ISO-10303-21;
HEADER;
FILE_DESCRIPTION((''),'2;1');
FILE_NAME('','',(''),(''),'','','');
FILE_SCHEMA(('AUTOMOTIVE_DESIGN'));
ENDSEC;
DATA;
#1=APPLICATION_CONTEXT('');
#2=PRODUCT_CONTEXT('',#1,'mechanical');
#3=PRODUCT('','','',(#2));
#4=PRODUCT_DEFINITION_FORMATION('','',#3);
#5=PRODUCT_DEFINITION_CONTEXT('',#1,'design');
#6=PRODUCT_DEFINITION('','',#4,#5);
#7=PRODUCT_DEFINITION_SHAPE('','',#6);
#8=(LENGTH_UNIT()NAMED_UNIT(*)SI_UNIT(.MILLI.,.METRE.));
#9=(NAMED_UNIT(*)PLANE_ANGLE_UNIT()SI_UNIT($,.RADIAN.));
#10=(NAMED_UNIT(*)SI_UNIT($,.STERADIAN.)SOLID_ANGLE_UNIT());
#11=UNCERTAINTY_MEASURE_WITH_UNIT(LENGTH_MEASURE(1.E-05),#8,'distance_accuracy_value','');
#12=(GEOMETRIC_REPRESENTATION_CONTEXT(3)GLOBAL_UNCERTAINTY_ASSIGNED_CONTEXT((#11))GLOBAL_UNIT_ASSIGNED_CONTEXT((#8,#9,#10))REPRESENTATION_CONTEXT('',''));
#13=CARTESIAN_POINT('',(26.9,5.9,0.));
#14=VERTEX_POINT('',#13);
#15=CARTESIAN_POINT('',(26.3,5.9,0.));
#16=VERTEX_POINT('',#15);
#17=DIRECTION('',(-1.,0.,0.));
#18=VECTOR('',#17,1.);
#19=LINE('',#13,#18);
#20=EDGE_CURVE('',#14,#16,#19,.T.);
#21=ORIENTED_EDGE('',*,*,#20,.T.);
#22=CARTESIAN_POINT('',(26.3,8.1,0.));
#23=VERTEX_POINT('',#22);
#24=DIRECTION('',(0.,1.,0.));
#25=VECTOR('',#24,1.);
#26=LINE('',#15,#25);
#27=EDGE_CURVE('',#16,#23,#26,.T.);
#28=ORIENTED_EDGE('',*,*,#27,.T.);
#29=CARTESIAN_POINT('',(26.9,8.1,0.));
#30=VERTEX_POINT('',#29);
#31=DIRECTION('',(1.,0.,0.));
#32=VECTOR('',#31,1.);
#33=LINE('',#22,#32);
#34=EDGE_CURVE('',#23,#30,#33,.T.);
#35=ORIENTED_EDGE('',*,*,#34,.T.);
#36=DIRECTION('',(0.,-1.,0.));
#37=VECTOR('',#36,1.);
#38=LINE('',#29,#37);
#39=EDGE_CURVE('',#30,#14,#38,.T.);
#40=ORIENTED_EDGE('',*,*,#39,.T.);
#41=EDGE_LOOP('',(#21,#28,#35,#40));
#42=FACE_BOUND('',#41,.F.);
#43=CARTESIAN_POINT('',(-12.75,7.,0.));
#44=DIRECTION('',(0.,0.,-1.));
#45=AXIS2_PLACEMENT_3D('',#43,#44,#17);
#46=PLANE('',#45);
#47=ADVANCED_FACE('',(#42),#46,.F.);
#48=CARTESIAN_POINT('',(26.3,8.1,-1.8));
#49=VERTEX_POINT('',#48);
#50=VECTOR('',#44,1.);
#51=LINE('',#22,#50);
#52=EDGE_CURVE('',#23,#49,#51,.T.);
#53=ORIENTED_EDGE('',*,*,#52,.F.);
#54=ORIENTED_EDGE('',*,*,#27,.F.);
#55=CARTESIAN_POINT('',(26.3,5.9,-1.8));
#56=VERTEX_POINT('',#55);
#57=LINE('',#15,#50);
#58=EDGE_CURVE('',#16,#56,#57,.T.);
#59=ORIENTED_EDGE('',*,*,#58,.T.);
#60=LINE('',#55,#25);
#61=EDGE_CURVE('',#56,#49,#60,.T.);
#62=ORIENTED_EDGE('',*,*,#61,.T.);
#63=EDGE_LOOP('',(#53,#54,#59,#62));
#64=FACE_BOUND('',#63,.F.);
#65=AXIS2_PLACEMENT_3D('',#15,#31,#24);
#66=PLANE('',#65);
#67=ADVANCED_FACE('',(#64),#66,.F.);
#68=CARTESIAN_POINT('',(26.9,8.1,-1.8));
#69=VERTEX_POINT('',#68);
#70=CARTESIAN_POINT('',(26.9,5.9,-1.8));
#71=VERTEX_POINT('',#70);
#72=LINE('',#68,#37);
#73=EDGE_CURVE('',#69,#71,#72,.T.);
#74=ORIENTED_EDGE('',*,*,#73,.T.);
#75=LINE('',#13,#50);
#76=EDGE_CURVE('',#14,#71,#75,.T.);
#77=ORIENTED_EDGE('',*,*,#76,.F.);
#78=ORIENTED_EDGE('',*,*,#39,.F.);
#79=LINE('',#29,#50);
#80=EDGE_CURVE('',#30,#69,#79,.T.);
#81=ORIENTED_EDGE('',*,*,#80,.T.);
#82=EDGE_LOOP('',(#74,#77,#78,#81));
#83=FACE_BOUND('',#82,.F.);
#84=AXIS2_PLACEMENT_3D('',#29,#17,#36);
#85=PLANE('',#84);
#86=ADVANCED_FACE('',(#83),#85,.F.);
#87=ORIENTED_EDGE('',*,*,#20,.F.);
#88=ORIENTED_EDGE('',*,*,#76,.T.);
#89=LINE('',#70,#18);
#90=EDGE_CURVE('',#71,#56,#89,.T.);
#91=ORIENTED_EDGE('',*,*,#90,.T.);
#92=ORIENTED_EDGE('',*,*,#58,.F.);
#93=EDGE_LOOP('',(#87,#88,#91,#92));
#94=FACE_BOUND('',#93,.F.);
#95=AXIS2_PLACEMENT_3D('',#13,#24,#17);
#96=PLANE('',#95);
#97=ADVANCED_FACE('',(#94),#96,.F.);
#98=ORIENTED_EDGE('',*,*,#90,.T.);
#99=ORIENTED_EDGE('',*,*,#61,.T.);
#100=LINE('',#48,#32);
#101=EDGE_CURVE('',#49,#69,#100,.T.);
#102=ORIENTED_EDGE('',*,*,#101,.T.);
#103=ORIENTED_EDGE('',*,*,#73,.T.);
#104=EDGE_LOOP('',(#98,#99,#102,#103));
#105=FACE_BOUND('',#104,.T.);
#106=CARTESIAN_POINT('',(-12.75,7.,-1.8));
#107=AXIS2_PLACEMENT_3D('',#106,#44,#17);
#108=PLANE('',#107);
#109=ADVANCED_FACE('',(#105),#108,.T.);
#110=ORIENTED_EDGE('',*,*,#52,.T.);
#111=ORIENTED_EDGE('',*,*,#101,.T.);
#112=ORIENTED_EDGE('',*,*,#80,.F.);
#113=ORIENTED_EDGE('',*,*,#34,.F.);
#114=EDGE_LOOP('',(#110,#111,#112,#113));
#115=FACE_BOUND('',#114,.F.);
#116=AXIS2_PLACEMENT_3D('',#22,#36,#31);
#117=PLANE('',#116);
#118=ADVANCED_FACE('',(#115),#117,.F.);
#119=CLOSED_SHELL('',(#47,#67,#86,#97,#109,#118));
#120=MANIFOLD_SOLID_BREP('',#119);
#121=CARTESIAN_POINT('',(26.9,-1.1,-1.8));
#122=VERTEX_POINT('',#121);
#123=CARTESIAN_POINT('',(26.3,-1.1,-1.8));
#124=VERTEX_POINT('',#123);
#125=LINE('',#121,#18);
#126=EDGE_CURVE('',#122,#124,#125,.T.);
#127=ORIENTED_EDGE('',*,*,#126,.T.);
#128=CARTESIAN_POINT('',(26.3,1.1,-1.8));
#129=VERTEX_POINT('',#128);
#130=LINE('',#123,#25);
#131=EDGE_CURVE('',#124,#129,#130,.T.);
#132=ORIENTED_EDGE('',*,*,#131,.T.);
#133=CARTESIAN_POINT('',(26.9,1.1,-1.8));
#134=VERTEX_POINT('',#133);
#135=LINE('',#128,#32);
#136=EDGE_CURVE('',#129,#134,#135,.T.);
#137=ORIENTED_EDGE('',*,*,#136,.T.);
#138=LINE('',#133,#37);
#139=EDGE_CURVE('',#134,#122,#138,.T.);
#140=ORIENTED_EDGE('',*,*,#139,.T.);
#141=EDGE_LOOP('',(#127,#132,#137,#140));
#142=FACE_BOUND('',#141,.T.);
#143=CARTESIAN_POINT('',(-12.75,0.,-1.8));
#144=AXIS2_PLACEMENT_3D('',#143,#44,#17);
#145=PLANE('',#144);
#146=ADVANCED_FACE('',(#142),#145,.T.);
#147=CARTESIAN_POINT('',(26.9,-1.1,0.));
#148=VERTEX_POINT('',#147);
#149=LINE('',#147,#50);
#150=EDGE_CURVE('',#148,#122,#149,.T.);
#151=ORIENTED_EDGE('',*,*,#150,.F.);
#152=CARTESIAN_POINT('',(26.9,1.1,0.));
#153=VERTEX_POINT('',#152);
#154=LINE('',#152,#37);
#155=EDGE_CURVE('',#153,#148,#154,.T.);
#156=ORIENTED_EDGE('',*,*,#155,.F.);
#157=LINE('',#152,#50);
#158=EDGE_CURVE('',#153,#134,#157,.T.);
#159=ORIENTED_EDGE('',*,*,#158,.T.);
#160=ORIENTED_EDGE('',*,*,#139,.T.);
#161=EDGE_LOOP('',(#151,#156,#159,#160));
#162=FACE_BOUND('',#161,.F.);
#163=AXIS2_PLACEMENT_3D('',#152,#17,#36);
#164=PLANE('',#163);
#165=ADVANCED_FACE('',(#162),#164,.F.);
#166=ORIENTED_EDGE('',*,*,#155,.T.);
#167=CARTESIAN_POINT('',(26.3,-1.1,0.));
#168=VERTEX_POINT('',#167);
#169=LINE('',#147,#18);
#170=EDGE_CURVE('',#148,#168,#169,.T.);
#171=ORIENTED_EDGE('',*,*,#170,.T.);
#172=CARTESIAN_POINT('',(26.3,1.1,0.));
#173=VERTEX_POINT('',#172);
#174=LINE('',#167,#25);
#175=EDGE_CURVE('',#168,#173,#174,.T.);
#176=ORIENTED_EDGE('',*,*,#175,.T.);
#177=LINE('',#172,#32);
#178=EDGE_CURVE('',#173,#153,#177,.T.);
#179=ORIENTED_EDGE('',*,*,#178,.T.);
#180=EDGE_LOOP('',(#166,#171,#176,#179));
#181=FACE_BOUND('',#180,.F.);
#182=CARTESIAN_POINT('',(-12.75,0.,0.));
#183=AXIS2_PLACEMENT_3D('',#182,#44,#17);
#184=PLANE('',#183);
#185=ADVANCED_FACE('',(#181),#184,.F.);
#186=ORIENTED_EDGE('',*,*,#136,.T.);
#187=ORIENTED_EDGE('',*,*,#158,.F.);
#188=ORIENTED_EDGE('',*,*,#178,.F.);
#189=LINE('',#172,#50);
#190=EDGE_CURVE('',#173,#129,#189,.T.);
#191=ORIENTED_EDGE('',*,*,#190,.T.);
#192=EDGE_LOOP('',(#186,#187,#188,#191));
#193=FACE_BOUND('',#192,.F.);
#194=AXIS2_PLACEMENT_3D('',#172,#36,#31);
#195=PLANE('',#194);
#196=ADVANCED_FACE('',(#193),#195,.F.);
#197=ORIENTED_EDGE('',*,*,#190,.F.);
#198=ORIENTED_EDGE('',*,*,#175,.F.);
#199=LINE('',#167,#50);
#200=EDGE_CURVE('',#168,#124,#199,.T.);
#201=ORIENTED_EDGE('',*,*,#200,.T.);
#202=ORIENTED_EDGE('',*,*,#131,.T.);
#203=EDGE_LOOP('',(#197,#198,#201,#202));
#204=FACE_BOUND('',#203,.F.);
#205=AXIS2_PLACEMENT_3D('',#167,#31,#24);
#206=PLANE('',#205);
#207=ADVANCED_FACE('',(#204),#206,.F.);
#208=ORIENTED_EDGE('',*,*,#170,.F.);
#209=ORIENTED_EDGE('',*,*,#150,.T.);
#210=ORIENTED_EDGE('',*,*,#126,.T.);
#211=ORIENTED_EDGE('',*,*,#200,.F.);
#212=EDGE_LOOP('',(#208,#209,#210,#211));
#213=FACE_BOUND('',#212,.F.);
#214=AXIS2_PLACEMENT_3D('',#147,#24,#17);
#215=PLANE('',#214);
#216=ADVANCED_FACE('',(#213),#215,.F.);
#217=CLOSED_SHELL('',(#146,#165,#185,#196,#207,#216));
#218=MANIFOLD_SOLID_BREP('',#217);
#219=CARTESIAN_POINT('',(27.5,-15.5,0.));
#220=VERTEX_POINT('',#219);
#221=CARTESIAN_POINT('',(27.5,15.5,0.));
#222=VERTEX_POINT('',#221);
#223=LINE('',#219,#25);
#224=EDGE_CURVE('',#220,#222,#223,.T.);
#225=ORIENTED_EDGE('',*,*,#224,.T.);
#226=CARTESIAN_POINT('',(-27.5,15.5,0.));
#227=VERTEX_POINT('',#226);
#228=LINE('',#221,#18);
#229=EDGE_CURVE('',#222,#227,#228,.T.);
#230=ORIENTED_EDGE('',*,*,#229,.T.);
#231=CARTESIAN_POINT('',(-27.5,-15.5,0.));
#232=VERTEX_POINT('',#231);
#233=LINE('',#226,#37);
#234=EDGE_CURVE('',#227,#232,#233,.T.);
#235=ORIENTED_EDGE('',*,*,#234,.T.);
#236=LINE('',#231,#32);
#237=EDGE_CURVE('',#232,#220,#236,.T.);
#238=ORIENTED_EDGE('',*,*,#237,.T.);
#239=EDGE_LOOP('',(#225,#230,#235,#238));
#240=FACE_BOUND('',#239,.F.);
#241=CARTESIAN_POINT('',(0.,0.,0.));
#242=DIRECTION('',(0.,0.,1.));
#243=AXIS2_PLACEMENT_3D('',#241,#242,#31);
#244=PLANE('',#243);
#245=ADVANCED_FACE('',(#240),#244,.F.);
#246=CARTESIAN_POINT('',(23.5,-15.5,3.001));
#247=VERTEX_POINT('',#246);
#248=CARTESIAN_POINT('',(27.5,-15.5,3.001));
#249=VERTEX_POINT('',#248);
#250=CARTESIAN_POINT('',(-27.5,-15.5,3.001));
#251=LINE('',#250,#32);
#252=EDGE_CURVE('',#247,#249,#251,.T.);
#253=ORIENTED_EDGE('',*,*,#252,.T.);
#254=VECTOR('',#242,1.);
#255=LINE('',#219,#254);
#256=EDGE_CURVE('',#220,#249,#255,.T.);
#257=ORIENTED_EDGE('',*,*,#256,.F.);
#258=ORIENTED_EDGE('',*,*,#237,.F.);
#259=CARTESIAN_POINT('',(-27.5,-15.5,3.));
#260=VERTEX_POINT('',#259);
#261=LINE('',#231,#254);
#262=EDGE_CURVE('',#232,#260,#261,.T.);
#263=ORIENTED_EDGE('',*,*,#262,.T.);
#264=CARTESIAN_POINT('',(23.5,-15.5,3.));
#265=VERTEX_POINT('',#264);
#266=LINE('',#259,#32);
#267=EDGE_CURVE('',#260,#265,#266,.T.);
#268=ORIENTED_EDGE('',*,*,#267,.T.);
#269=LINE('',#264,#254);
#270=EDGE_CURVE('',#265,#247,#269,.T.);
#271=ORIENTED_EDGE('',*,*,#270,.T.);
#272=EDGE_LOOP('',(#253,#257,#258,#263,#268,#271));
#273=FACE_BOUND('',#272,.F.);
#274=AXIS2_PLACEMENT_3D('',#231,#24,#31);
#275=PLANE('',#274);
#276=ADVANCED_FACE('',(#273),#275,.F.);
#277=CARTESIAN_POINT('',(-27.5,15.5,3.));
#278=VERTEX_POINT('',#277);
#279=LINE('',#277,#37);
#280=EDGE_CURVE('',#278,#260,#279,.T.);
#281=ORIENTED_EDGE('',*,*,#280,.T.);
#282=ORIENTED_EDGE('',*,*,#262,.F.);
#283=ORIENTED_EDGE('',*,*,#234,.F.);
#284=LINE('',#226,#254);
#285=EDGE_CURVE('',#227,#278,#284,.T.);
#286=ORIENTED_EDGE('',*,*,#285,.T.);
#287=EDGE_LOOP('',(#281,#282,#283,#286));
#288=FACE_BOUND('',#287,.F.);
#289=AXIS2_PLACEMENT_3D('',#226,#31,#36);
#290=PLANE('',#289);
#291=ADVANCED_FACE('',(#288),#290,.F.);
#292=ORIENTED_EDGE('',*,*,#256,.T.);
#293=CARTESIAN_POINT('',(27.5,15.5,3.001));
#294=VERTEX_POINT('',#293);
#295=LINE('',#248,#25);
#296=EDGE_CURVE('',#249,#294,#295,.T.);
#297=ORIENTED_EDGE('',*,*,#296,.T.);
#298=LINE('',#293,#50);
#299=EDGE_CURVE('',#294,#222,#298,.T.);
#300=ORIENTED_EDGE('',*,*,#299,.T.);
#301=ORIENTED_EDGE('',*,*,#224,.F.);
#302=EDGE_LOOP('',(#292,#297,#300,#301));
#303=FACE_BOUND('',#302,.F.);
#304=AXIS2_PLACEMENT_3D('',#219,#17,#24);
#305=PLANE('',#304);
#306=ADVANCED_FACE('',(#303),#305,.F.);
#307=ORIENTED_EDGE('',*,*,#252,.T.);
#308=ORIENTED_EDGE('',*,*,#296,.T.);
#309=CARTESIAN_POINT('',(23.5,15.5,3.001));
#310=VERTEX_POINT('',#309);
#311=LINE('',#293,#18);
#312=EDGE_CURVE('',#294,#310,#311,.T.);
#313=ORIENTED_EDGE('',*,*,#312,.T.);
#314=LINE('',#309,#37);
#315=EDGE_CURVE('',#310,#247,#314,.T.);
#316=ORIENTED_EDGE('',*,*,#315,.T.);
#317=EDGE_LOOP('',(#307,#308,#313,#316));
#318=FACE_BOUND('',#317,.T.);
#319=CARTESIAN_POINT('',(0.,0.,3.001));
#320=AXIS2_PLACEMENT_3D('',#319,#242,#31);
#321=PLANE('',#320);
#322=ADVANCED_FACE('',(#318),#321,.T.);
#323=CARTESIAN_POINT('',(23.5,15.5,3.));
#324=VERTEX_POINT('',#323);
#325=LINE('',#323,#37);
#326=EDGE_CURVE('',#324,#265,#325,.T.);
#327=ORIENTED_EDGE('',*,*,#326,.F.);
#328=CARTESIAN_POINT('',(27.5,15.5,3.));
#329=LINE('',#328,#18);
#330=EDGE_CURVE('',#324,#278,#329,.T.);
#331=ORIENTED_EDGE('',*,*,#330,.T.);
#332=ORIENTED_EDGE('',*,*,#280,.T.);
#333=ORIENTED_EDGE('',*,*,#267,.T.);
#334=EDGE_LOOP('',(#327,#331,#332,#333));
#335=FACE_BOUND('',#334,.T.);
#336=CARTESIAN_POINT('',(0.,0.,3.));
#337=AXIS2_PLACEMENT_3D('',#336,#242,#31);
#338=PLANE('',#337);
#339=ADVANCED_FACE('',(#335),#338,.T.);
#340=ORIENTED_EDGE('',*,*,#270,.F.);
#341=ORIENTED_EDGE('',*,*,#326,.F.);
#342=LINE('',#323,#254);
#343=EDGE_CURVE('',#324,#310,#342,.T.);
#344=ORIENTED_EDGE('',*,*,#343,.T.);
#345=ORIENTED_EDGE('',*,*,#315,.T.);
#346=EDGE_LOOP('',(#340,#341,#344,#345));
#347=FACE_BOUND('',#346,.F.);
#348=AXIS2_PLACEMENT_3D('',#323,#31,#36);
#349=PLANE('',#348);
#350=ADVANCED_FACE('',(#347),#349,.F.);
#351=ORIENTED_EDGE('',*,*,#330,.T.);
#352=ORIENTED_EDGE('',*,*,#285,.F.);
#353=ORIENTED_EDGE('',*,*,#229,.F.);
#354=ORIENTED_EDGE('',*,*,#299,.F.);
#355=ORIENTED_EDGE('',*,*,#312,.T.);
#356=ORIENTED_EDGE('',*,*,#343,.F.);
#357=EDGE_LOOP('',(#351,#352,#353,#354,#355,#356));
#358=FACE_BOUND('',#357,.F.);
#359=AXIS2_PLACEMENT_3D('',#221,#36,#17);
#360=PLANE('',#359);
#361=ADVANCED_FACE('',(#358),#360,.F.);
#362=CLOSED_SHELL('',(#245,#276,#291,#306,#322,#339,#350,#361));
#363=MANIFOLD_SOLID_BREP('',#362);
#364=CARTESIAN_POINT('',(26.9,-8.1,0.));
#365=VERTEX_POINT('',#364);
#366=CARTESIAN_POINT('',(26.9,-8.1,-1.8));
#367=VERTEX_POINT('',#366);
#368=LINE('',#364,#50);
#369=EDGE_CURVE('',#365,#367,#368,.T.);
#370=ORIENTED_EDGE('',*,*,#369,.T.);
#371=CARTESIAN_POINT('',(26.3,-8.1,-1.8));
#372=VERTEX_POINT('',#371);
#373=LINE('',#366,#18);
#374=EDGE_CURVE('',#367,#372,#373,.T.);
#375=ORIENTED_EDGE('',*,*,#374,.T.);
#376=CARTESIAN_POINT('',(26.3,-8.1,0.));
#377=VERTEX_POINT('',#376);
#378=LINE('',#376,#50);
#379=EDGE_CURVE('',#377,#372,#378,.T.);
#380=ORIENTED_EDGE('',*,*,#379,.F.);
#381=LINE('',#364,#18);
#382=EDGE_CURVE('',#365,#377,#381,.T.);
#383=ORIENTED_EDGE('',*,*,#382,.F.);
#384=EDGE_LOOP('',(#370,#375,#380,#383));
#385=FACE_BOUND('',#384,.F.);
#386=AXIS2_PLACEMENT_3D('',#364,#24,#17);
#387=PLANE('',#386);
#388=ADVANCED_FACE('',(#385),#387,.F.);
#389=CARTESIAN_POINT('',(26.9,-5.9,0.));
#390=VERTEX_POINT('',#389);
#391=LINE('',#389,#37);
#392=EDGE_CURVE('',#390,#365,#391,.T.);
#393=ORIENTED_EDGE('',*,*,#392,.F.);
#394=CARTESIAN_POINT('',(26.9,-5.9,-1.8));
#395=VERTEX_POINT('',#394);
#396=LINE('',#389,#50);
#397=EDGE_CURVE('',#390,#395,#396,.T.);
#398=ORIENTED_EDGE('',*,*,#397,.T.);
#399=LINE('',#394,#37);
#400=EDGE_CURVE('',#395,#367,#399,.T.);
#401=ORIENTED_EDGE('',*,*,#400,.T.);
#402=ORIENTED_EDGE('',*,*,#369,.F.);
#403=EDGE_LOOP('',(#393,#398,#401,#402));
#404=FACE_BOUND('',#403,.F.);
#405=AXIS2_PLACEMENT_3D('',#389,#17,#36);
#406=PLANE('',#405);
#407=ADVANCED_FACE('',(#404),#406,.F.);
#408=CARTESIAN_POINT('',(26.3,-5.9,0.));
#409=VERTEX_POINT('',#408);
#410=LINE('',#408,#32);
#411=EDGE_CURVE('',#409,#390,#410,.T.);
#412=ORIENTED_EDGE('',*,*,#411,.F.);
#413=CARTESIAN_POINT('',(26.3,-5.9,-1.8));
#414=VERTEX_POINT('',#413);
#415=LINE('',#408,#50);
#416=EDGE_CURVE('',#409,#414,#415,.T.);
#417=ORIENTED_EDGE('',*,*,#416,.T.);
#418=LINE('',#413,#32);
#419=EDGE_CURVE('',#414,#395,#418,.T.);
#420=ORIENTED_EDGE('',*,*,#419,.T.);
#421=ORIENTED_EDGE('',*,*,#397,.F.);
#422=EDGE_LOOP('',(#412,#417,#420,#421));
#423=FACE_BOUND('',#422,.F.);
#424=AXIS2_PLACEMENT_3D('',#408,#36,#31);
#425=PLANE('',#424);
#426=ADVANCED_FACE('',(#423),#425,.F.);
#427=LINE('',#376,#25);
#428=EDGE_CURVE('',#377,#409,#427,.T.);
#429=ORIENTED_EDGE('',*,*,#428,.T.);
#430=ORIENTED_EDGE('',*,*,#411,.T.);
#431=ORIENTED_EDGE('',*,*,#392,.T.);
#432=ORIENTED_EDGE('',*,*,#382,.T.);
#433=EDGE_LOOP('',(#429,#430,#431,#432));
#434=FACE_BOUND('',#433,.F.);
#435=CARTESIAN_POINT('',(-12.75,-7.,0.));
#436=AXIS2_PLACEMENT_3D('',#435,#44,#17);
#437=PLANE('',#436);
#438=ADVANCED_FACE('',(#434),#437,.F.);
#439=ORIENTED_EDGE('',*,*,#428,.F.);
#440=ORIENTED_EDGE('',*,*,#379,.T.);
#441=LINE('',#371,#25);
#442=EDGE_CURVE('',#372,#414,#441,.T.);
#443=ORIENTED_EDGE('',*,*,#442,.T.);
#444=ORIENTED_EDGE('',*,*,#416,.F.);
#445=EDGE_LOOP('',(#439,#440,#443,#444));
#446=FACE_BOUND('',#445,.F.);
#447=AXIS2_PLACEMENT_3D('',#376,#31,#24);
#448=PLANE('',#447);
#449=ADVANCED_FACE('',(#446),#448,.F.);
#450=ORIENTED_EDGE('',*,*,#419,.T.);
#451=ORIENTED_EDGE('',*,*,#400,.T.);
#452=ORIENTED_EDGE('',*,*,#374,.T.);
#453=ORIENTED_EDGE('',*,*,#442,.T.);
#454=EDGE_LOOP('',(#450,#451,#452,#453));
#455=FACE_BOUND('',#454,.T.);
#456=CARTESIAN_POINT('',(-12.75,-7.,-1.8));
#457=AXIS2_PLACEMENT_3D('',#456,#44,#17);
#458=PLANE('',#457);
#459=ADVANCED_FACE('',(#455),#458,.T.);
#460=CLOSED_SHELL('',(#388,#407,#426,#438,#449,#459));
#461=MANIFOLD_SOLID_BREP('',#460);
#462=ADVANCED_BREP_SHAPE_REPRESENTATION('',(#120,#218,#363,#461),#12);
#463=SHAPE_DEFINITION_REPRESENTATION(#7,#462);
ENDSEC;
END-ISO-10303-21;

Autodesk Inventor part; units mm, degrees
ref_plane "YZ Plane" through (0, 0, 0) normal (1, 0, 0) x (0, 1, 0)
ref_plane "XZ Plane" through (0, 0, 0) normal (0, 1, 0) x (-1, 0, 0)
ref_plane "XY Plane" through (0, 0, 0) normal (0, 0, 1) x (1, 0, 0)
sketch "Sketch10" plane through (0, 0, 0) normal (0, 0, 1) x (1, 0, 0)
  line L0 (-27.5, -15.5) -> (27.5, -15.5)
  line L1 (27.5, -15.5) -> (27.5, 15.5)
  line L2 (27.5, 15.5) -> (-27.5, 15.5)
  line L3 (-27.5, 15.5) -> (-27.5, -15.5)
  line L4 (-27.5, -15.5) -> (27.5, 15.5) construction
  line L5 (27.5, -15.5) -> (-27.5, 15.5) construction
  point P0 (0, 0)
  dimension "d58" = 55
  dimension "d59" = 31
extrude "Extrusion9" add sketch "Sketch10" along normal blind 3
sketch "Sketch12" plane through (0, 0, 3) normal (0, 0, 1) x (1, 0, 0)
  line L0 (27.5, -15.5) -> (27.5, 15.5) projected
  line L1 (-27.5, -15.5) -> (27.5, -15.5) projected
  line L2 (27.5, 15.5) -> (23.5, 15.5)
  line L3 (23.5, 15.5) -> (23.5, -15.5)
  line L4 (23.5, -15.5) -> (27.5, -15.5)
  line L5 (27.5, -15.5) -> (27.5, 15.5)
  point P0 (0, 0)
  dimension "d72" = 4
extrude "Extrusion11" add sketch "Sketch12" along normal blind 0.001
sketch "Sketch11" plane through (-12.75, 0, 0) normal (0, 0, -1) x (-1, 0, 0)
  line L0 (-39.65, -1.1) -> (-39.05, -1.1)
  line L1 (-39.05, -1.1) -> (-39.05, 1.1)
  line L2 (-39.05, 1.1) -> (-39.65, 1.1)
  line L3 (-39.65, 1.1) -> (-39.65, -1.1)
  line L4 (-40.25, -15.5) -> (-40.25, 15.5)
  line L5 (-40.25, -15.5) -> (-40.25, 15.5) projected
  point P0 (-39.65, 0)
  point P1 (-40.25, 0)
  point P2 (-40.25, 0)
  dimension "d64" = 0.6
  dimension "d65" = 2.2
  dimension "d63" = 0.6
extrude "Extrusion10" add sketch "Sketch11" along normal blind 1.8 separate body
pattern_linear "Rectangular Pattern1" count 3 spacing 7 along (0, -1, 0) of "Extrusion10" first direction both ways yes bodies 2
properties part number "DISP BKL LED TB1012S"
